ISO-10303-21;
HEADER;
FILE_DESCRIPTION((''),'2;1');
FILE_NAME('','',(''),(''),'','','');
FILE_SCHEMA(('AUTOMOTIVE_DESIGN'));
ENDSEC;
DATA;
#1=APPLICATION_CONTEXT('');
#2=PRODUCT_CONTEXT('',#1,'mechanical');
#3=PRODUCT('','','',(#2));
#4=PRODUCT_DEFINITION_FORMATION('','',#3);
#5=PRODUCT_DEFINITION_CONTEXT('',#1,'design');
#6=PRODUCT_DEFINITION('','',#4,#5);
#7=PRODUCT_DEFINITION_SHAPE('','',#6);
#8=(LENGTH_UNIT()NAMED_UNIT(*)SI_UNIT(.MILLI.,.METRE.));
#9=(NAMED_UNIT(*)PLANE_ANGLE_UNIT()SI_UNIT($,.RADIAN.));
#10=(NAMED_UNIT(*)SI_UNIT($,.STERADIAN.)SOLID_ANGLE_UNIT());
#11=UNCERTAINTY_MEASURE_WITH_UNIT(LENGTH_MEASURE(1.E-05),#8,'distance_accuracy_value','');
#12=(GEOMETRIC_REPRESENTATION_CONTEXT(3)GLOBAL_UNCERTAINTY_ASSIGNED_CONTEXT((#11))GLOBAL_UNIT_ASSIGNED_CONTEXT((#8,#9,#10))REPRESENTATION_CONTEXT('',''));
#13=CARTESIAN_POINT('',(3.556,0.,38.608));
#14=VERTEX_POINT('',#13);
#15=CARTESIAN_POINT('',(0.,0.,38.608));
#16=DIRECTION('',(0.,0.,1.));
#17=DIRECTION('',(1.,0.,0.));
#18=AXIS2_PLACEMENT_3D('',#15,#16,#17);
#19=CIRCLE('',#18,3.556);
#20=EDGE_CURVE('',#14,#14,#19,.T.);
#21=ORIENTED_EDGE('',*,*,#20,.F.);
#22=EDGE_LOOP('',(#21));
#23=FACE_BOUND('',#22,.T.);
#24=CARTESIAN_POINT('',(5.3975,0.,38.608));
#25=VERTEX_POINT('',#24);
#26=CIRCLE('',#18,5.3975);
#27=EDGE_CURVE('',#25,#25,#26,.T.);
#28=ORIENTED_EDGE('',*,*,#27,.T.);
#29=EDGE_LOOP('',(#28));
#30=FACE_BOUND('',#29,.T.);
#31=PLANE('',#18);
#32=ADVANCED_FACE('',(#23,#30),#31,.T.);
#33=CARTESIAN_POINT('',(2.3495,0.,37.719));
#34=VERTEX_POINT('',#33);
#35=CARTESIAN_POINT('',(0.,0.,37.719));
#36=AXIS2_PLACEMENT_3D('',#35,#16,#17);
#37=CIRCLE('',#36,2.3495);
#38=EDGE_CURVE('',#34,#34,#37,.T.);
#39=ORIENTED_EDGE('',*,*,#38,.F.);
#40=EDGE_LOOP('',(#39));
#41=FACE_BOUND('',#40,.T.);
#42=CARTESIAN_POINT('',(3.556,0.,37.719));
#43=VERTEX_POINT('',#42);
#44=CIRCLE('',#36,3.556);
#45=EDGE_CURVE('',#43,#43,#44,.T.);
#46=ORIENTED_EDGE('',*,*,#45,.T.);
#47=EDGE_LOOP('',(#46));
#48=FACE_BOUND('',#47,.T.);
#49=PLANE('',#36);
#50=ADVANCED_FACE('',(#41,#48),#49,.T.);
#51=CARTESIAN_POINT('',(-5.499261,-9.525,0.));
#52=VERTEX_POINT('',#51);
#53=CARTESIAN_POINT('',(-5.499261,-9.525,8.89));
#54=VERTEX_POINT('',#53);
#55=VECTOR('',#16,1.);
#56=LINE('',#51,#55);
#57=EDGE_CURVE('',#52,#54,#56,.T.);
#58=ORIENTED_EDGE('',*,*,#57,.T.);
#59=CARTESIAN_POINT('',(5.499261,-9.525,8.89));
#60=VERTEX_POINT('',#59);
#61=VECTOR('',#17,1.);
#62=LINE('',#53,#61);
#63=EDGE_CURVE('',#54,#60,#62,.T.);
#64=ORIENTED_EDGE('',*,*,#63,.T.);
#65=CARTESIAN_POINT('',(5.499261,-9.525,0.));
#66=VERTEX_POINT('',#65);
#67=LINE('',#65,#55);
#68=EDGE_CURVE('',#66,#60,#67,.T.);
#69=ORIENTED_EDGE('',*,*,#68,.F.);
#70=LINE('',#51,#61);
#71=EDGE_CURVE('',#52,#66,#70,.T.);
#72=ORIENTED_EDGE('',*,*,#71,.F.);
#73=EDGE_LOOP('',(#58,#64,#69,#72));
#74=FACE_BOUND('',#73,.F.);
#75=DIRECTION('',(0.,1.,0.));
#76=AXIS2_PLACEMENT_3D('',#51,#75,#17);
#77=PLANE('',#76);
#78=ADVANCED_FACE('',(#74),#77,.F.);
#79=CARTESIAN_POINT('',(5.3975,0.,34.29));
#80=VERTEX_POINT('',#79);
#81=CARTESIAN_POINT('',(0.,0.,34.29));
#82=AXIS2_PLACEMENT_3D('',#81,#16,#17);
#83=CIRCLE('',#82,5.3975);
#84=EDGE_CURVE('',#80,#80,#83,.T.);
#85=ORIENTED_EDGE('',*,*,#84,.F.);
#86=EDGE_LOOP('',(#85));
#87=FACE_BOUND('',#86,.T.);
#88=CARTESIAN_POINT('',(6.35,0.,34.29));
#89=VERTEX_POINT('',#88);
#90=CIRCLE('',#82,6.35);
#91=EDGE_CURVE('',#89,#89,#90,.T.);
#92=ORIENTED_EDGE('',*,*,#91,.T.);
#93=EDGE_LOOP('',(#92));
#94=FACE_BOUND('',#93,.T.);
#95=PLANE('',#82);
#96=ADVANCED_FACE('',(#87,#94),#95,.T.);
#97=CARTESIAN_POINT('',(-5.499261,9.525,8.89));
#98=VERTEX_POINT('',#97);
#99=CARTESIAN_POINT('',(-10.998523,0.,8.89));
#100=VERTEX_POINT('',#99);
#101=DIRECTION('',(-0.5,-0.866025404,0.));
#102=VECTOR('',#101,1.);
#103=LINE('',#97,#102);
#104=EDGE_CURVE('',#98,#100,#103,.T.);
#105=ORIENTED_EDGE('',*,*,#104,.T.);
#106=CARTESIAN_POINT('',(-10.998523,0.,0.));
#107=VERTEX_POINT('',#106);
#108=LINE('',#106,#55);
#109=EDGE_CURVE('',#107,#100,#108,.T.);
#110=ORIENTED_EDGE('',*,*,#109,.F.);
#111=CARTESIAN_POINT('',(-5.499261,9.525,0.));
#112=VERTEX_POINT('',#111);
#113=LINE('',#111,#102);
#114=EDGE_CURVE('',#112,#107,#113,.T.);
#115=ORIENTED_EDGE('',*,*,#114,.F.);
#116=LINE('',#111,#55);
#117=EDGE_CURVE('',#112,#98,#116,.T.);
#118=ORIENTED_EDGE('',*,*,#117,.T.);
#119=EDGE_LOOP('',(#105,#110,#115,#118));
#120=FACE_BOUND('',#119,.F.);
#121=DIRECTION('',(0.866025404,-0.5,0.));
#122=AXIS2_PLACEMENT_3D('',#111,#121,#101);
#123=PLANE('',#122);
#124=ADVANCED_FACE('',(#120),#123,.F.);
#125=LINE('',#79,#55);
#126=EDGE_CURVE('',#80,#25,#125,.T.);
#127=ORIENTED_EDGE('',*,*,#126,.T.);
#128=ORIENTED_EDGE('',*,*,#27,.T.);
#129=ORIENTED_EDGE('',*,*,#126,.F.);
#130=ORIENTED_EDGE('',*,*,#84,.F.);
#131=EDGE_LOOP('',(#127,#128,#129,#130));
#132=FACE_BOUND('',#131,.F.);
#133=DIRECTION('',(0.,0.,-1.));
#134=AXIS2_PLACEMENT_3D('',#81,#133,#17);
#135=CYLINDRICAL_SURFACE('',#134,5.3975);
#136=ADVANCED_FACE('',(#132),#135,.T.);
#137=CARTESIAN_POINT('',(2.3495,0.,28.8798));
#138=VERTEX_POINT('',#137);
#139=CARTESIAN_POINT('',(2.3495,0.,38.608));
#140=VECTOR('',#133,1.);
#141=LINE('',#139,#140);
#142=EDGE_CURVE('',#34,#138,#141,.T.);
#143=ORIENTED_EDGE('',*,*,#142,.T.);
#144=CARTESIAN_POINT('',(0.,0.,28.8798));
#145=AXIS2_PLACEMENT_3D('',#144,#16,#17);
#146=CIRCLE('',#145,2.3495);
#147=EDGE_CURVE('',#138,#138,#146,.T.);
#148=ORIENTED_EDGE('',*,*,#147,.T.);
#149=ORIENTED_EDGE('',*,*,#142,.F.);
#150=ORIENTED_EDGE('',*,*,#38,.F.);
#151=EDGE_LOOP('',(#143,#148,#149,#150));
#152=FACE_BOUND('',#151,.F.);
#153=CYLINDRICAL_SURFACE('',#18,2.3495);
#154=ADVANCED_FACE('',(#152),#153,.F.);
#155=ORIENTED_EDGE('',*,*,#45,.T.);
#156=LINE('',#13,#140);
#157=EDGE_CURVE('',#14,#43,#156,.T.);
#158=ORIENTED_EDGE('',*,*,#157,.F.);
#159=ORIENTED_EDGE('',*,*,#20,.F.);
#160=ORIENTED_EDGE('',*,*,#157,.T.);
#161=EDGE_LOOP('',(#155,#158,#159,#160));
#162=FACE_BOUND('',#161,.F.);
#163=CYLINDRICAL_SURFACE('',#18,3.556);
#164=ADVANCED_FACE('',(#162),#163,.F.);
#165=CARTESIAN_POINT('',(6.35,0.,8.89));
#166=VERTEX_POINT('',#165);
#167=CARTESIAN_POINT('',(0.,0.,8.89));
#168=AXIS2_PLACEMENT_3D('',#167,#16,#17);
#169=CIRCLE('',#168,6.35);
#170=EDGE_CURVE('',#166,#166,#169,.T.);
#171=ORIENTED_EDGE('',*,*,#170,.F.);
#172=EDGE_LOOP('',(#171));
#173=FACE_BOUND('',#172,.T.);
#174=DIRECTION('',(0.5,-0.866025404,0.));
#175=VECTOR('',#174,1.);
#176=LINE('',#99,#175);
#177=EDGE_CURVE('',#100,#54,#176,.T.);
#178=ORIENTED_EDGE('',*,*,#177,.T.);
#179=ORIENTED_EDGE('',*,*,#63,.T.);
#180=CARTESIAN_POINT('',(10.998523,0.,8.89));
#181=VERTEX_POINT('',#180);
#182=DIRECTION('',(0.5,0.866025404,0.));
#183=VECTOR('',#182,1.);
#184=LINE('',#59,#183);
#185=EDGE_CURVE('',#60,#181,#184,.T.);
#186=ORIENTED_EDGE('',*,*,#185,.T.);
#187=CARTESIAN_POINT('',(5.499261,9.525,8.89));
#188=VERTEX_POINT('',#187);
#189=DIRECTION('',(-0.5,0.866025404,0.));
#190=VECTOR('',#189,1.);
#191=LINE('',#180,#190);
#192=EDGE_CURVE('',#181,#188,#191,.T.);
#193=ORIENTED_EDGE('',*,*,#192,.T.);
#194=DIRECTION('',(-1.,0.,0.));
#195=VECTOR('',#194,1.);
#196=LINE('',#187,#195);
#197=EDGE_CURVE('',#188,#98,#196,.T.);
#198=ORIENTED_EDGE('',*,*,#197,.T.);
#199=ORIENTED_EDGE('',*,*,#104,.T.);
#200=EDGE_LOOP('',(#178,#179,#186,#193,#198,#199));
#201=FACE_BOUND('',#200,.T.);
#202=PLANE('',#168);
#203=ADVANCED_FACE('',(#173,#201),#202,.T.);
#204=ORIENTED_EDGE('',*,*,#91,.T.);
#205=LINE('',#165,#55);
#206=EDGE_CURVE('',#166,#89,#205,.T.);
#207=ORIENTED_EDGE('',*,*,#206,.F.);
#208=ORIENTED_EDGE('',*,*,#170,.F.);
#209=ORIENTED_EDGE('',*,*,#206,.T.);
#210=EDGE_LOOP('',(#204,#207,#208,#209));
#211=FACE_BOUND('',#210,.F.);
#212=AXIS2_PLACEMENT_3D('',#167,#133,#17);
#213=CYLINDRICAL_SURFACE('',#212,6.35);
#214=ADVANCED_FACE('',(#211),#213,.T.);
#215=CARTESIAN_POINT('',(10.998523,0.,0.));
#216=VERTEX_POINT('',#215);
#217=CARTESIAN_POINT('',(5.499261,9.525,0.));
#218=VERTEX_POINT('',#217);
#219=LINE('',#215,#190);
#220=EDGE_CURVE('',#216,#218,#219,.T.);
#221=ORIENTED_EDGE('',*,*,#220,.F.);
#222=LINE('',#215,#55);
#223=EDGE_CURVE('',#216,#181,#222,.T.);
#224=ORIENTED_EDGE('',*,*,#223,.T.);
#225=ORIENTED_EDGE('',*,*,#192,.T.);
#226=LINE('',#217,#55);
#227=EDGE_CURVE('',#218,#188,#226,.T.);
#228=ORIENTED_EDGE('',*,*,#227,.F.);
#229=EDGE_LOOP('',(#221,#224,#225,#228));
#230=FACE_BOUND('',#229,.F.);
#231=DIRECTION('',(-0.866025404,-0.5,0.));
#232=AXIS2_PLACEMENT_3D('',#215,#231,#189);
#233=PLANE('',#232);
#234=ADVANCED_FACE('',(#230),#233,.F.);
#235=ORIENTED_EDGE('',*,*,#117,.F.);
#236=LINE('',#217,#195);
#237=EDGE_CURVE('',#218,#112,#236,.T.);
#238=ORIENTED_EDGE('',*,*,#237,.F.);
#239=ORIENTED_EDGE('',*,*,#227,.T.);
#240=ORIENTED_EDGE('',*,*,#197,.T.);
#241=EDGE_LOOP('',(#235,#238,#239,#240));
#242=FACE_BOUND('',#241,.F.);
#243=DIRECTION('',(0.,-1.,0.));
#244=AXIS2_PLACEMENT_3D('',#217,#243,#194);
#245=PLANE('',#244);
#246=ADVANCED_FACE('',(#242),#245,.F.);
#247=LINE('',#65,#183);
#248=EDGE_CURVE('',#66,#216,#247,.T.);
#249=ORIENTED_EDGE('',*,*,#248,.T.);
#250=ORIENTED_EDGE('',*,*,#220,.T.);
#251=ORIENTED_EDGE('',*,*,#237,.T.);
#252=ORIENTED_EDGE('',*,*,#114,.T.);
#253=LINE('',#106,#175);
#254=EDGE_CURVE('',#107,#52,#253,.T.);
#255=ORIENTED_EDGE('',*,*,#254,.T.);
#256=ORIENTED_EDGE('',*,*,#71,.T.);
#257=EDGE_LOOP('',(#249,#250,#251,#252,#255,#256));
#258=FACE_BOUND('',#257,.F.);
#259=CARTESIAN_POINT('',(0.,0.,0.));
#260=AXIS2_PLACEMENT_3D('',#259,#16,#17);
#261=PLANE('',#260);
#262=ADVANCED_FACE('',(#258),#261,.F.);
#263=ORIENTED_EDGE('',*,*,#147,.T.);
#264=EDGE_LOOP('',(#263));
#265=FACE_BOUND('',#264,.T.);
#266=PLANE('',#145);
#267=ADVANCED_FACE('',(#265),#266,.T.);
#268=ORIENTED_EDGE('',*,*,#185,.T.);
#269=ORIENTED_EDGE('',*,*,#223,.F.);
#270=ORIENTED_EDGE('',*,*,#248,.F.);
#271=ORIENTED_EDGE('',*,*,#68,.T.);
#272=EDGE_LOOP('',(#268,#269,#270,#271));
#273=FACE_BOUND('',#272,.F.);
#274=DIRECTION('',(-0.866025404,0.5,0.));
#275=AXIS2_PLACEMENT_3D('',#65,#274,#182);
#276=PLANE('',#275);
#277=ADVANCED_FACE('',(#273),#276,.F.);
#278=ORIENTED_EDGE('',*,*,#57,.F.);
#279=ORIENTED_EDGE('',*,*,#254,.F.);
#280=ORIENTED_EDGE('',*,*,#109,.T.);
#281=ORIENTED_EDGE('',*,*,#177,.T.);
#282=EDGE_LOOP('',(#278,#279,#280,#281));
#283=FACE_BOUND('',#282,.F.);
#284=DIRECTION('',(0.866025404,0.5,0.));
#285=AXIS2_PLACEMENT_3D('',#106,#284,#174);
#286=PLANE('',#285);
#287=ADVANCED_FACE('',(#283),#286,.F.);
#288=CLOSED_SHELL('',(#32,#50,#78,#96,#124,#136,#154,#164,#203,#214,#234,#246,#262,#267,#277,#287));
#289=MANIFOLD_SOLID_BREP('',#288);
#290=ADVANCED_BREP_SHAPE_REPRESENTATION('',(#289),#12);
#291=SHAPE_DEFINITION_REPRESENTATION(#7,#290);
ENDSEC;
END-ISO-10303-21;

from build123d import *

# Parameters (mm, degrees)
F6_DEPTH  = 8.89
F7_R      = 6.35
F8_DEPTH  = 25.4
F9_R      = 5.3975
F10_DEPTH = 4.318
F11_R     = 3.556
F12_DEPTH = 0.889
F13_R     = 2.3495
F14_DEPTH = 9.7282


# Not quite as in the source:
# - a variable given as a bare number and used for a length is read in inches; the dataset says mm whatever the document's units were


with BuildPart() as f6:
    # F5 (on Top) → F6 (new body)
    with BuildSketch(Plane.XY):
        Polygon((5.499261314, 9.525), (-5.499261314, 9.525), (-10.9985226281, 0), (-5.499261314, -9.525), (5.499261314, -9.525), (10.9985226281, 0), align=None)
    extrude(amount=F6_DEPTH)

    # F7 (on face) → F8 (join)
    with BuildSketch(Plane.XY.offset(8.89)):
        Circle(F7_R)
    extrude(amount=F8_DEPTH)

    # F9 (on face) → F10 (join)
    with BuildSketch(Plane.XY.offset(34.29)):
        Circle(F9_R)
    extrude(amount=F10_DEPTH)

    # F11 (on face) → F12 (cut)
    with BuildSketch(Plane.XY.offset(38.608)):
        Circle(F11_R)
    extrude(amount=-F12_DEPTH, mode=Mode.SUBTRACT)

    # F13 (on face) → F14 (cut)
    with BuildSketch(Plane.XY.offset(38.608)):
        Circle(F13_R)
    extrude(amount=-F14_DEPTH, mode=Mode.SUBTRACT)


solid = f6.part
